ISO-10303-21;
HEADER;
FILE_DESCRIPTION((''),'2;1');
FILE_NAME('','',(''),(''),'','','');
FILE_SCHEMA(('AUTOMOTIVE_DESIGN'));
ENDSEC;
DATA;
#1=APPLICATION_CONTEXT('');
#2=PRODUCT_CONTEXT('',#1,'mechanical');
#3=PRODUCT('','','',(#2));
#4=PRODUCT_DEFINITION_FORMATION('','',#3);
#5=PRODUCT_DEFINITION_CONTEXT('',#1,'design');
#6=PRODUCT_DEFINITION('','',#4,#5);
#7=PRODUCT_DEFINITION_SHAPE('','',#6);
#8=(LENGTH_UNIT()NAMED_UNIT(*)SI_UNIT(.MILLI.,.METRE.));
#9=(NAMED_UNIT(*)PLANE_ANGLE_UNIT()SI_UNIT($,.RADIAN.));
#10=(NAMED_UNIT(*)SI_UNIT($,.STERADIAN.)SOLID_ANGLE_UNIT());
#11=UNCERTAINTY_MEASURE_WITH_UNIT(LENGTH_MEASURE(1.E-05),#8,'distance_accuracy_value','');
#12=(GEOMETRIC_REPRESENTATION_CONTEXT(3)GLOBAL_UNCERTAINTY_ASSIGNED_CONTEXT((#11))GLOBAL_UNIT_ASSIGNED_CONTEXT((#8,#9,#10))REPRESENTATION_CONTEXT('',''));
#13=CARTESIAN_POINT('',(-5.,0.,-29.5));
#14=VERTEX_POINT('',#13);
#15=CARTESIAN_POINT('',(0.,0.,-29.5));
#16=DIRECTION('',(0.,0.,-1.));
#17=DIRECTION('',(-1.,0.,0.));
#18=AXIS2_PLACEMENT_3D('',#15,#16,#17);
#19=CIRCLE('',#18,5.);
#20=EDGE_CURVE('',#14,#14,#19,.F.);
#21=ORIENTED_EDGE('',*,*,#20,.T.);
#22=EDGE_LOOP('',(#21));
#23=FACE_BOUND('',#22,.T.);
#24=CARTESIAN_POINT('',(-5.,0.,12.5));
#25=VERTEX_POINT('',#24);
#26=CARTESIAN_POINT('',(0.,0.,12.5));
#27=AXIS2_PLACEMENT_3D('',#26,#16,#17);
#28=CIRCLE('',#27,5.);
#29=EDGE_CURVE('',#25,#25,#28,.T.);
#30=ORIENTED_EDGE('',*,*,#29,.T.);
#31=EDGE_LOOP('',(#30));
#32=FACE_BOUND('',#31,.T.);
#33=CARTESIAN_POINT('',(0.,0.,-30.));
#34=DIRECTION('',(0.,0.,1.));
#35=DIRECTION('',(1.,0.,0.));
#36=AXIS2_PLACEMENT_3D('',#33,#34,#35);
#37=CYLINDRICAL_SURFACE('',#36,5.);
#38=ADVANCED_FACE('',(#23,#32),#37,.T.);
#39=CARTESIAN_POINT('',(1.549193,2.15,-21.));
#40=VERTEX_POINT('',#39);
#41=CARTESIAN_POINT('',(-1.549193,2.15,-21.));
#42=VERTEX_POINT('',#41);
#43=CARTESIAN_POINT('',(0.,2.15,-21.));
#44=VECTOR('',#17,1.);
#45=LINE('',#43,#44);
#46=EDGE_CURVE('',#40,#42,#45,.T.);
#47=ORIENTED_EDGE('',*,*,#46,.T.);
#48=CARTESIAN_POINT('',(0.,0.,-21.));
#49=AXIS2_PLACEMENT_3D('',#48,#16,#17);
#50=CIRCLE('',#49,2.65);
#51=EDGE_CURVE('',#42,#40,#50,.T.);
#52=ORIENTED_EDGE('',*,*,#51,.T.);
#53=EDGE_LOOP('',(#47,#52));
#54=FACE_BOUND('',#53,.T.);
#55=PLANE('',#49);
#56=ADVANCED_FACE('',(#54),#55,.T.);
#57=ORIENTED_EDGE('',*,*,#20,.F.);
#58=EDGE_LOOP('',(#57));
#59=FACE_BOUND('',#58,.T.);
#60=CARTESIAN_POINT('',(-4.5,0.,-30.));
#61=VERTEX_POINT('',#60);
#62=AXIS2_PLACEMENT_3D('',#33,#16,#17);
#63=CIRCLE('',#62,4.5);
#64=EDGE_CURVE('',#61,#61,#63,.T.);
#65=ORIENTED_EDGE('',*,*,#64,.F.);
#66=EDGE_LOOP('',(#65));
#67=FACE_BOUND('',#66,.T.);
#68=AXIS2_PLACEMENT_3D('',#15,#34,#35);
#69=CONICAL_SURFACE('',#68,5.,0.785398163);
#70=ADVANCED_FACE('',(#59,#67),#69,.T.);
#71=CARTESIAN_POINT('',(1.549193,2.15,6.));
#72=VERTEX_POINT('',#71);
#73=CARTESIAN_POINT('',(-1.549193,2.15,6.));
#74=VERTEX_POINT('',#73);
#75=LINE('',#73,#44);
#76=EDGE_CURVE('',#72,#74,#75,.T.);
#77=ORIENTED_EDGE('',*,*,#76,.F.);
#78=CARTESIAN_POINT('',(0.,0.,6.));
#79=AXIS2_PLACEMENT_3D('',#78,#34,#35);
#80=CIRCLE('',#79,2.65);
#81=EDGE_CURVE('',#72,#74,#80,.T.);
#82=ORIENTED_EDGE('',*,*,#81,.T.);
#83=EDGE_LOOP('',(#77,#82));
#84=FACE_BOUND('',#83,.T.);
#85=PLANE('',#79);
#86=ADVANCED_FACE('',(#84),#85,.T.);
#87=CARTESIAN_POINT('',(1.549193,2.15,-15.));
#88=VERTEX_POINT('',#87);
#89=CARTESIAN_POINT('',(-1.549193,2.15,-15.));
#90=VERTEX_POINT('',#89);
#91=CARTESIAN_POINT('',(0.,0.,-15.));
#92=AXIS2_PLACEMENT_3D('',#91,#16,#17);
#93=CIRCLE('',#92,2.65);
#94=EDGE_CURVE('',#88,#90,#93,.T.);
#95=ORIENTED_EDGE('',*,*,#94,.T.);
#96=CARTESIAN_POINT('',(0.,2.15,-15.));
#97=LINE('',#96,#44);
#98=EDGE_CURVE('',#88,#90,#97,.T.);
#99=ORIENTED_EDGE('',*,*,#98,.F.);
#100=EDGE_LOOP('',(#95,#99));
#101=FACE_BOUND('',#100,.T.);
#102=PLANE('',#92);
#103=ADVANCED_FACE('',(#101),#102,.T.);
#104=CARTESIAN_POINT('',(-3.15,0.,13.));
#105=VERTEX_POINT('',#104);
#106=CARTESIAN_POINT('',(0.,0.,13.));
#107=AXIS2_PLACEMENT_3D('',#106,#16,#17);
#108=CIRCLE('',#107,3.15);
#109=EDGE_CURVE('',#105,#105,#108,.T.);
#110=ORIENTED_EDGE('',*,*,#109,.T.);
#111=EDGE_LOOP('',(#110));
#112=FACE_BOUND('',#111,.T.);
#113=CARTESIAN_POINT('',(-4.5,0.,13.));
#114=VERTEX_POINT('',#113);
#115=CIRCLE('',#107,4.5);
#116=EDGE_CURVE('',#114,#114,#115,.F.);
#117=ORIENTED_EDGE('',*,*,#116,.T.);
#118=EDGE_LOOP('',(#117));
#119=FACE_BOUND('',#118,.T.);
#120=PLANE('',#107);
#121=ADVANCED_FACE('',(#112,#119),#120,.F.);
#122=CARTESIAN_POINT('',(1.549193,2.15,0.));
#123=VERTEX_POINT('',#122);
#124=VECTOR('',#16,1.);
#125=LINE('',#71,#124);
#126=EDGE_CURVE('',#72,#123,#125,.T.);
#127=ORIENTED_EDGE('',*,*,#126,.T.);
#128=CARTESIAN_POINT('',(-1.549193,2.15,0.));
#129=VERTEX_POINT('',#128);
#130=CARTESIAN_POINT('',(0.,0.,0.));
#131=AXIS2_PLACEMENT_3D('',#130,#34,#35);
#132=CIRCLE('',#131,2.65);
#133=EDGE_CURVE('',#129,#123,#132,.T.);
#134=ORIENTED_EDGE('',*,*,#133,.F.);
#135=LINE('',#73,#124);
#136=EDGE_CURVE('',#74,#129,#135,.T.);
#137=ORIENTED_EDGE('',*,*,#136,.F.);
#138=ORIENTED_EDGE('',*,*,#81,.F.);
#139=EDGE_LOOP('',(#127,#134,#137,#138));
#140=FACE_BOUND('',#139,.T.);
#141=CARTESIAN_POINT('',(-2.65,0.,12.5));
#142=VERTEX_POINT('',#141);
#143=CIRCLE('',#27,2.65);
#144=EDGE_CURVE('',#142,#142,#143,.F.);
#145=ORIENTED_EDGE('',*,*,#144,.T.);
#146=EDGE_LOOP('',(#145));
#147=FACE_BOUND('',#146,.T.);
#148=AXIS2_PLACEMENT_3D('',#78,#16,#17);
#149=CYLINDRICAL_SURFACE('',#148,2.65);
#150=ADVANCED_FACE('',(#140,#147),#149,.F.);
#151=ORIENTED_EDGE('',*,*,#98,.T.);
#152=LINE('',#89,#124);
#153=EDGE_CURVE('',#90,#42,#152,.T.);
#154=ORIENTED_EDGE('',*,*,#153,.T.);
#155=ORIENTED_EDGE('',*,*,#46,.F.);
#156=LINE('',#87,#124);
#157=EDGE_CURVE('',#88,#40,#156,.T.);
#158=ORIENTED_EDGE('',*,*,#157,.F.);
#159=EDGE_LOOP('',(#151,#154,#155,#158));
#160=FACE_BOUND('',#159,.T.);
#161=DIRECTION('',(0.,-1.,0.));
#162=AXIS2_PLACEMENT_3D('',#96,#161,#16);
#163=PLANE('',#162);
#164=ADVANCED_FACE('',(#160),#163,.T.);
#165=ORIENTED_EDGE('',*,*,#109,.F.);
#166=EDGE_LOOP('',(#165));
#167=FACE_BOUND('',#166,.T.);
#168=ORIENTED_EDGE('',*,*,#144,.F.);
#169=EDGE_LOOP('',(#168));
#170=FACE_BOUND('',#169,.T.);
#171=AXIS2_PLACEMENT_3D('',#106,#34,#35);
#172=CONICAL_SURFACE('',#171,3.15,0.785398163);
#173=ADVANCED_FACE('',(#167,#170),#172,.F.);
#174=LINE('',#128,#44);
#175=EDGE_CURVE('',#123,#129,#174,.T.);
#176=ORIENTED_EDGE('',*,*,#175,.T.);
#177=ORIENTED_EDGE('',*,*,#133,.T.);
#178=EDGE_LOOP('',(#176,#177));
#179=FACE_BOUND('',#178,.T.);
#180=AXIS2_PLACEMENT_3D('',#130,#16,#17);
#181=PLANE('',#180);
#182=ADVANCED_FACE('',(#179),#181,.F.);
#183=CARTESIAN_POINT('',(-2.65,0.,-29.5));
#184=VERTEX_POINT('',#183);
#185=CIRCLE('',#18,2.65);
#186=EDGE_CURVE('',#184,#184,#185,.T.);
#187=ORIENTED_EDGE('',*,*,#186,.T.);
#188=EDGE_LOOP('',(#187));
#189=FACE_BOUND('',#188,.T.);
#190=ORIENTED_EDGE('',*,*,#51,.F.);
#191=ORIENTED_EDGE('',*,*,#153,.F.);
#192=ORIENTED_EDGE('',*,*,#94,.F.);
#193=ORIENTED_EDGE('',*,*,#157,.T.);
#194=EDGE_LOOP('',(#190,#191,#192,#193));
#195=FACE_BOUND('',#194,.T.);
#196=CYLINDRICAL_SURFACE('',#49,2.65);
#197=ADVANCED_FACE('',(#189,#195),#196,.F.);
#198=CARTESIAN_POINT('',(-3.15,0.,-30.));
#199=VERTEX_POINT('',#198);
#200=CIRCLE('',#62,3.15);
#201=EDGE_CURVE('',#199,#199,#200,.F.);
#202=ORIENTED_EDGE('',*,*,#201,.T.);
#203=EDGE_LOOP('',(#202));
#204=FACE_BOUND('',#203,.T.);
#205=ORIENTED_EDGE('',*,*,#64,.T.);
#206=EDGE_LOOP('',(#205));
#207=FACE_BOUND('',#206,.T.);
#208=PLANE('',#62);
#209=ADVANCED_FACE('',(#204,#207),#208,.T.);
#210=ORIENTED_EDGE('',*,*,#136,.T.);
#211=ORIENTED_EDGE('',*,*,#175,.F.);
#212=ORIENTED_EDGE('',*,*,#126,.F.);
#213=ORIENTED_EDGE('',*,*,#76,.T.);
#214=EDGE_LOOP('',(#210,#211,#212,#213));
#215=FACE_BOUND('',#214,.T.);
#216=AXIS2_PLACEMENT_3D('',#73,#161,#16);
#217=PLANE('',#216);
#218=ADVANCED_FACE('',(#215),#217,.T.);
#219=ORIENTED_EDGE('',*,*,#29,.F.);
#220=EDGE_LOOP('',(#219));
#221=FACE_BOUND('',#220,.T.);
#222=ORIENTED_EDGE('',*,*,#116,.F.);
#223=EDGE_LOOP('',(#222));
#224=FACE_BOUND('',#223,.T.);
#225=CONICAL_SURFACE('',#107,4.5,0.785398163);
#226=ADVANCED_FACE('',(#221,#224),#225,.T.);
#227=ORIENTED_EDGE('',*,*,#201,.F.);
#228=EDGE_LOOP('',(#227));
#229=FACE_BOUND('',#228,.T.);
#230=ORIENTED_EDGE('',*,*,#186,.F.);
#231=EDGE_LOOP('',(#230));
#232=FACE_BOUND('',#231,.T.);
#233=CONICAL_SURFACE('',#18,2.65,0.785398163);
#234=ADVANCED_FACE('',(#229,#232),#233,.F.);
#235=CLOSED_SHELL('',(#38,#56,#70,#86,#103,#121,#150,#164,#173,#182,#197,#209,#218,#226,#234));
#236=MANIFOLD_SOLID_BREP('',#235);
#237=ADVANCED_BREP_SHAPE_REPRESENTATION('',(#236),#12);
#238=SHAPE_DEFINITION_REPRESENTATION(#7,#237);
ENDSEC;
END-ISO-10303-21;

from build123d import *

# Parameters (mm, degrees)
EXTRUDE_THIN1_DEPTH = 6
SKETCH2_R           = 5.65
SKETCH2_R_2         = 2.65
BOSS_EXTRUDE1_DEPTH = 13
BOSS_EXTRUDE2_START = 30
SKETCH3_R           = 5.65
BOSS_EXTRUDE2_DEPTH = 30
CHAMFER1_SIZE       = 0.5
CHAMFER2_SIZE       = 0.5
SKETCH4_R           = 2.65
CUT_EXTRUDE1_DEPTH  = 9
CUT_EXTRUDE2_DEPTH  = 6
CHAMFER3_SIZE       = 0.5
SKETCH8_OUTSIDE_W   = 22.474
SKETCH8_OUTSIDE_H   = 22.474
SKETCH8_OUTSIDE_R   = 5
CUT_EXTRUDE5_DEPTH  = 44.736083501
CHAMFER4_SIZE       = 0.5


with BuildPart() as part:
    # Sketch1 → Extrude-Thin1 (new body)
    with BuildSketch(Plane.XY):
        with BuildLine():
            Line((-1.843908891, 3.15), (1.843908891, 3.15))
            ThreePointArc((1.843908891, 3.15), (0, -3.65), (-1.843908891, 3.15))
        make_face()
        with BuildLine():
            Line((-1.549193338, 2.15), (1.549193338, 2.15))
            ThreePointArc((1.549193338, 2.15), (0, -2.65), (-1.549193338, 2.15))
        make_face(mode=Mode.SUBTRACT)
    extrude(amount=EXTRUDE_THIN1_DEPTH)

    # Sketch2 → Boss-Extrude1 (add)
    with BuildSketch(Plane(origin=(0, 0, 0), x_dir=(-1, 0, 0), z_dir=(0, 0, -1))):
        Circle(SKETCH2_R)
        Circle(SKETCH2_R_2, mode=Mode.SUBTRACT)
    extrude(amount=-BOSS_EXTRUDE1_DEPTH)

    # Sketch3 → Boss-Extrude2 (add)
    with BuildSketch(Plane(origin=(0, 0, 0), x_dir=(-1, 0, 0), z_dir=(0, 0, -1)).offset(BOSS_EXTRUDE2_START)):
        Circle(SKETCH3_R)
    extrude(amount=-BOSS_EXTRUDE2_DEPTH)

    # Chamfer1
    # the kernel refuses this chamfer: 0.5 mm, written as the material it takes off along each edge
    with BuildSketch(Plane(origin=(0, 0, 13), x_dir=(-1, 0, 0), z_dir=(0, -1, 0))) as chamfer1_piece_1:
        Polygon((2.65 + CHAMFER1_SIZE, 0), (2.65, CHAMFER1_SIZE), (2.65, 0), align=None)
    revolve(axis=Axis((0, 0, 13), (0, 0, -1)), mode=Mode.SUBTRACT)

    # Chamfer2
    chamfer2_edges = [part.edges().sort_by_distance(p)[0] for p in [
        (5.65, 0, 13),
    ]]
    chamfer(chamfer2_edges, length=CHAMFER2_SIZE)

    # Sketch4 → Cut-Extrude1 (cut)
    with BuildSketch(Plane(origin=(0, 0, -30), x_dir=(-1, 0, 0), z_dir=(0, 0, -1))):
        Circle(SKETCH4_R)
    extrude(amount=-CUT_EXTRUDE1_DEPTH, mode=Mode.SUBTRACT)

    # Sketch5 → Cut-Extrude2 (cut)
    with BuildSketch(Plane(origin=(0, 0, -21), x_dir=(-1, 0, 0), z_dir=(0, 0, -1))):
        with BuildLine():
            Line((1.549193338, 2.15), (-1.549193338, 2.15))
            ThreePointArc((-1.549193338, 2.15), (-1.207712228, -2.358798672), (2.65, 0))
            ThreePointArc((2.65, 0), (2.358798672, 1.207712228), (1.549193338, 2.15))
        make_face()
    extrude(amount=-CUT_EXTRUDE2_DEPTH, mode=Mode.SUBTRACT)

    # Chamfer3
    chamfer3_edges = [part.edges().sort_by_distance(p)[0] for p in [
        (5.65, 0, -30),
        (2.65, 0, -30),
    ]]
    chamfer(chamfer3_edges, length=CHAMFER3_SIZE)

    # Sketch8 outside → Cut-Extrude5 (cut, through all)
    with BuildSketch(Plane.XY.offset(13)):
        Rectangle(SKETCH8_OUTSIDE_W, SKETCH8_OUTSIDE_H)
        Circle(SKETCH8_OUTSIDE_R, mode=Mode.SUBTRACT)
    extrude(amount=-CUT_EXTRUDE5_DEPTH, mode=Mode.SUBTRACT)

    # Chamfer4
    chamfer4_edges = [part.edges().sort_by_distance(p)[0] for p in [
        (-5, 0, -30),
        (-5, 0, 13),
    ]]
    chamfer(chamfer4_edges, length=CHAMFER4_SIZE)


solid = part.part
